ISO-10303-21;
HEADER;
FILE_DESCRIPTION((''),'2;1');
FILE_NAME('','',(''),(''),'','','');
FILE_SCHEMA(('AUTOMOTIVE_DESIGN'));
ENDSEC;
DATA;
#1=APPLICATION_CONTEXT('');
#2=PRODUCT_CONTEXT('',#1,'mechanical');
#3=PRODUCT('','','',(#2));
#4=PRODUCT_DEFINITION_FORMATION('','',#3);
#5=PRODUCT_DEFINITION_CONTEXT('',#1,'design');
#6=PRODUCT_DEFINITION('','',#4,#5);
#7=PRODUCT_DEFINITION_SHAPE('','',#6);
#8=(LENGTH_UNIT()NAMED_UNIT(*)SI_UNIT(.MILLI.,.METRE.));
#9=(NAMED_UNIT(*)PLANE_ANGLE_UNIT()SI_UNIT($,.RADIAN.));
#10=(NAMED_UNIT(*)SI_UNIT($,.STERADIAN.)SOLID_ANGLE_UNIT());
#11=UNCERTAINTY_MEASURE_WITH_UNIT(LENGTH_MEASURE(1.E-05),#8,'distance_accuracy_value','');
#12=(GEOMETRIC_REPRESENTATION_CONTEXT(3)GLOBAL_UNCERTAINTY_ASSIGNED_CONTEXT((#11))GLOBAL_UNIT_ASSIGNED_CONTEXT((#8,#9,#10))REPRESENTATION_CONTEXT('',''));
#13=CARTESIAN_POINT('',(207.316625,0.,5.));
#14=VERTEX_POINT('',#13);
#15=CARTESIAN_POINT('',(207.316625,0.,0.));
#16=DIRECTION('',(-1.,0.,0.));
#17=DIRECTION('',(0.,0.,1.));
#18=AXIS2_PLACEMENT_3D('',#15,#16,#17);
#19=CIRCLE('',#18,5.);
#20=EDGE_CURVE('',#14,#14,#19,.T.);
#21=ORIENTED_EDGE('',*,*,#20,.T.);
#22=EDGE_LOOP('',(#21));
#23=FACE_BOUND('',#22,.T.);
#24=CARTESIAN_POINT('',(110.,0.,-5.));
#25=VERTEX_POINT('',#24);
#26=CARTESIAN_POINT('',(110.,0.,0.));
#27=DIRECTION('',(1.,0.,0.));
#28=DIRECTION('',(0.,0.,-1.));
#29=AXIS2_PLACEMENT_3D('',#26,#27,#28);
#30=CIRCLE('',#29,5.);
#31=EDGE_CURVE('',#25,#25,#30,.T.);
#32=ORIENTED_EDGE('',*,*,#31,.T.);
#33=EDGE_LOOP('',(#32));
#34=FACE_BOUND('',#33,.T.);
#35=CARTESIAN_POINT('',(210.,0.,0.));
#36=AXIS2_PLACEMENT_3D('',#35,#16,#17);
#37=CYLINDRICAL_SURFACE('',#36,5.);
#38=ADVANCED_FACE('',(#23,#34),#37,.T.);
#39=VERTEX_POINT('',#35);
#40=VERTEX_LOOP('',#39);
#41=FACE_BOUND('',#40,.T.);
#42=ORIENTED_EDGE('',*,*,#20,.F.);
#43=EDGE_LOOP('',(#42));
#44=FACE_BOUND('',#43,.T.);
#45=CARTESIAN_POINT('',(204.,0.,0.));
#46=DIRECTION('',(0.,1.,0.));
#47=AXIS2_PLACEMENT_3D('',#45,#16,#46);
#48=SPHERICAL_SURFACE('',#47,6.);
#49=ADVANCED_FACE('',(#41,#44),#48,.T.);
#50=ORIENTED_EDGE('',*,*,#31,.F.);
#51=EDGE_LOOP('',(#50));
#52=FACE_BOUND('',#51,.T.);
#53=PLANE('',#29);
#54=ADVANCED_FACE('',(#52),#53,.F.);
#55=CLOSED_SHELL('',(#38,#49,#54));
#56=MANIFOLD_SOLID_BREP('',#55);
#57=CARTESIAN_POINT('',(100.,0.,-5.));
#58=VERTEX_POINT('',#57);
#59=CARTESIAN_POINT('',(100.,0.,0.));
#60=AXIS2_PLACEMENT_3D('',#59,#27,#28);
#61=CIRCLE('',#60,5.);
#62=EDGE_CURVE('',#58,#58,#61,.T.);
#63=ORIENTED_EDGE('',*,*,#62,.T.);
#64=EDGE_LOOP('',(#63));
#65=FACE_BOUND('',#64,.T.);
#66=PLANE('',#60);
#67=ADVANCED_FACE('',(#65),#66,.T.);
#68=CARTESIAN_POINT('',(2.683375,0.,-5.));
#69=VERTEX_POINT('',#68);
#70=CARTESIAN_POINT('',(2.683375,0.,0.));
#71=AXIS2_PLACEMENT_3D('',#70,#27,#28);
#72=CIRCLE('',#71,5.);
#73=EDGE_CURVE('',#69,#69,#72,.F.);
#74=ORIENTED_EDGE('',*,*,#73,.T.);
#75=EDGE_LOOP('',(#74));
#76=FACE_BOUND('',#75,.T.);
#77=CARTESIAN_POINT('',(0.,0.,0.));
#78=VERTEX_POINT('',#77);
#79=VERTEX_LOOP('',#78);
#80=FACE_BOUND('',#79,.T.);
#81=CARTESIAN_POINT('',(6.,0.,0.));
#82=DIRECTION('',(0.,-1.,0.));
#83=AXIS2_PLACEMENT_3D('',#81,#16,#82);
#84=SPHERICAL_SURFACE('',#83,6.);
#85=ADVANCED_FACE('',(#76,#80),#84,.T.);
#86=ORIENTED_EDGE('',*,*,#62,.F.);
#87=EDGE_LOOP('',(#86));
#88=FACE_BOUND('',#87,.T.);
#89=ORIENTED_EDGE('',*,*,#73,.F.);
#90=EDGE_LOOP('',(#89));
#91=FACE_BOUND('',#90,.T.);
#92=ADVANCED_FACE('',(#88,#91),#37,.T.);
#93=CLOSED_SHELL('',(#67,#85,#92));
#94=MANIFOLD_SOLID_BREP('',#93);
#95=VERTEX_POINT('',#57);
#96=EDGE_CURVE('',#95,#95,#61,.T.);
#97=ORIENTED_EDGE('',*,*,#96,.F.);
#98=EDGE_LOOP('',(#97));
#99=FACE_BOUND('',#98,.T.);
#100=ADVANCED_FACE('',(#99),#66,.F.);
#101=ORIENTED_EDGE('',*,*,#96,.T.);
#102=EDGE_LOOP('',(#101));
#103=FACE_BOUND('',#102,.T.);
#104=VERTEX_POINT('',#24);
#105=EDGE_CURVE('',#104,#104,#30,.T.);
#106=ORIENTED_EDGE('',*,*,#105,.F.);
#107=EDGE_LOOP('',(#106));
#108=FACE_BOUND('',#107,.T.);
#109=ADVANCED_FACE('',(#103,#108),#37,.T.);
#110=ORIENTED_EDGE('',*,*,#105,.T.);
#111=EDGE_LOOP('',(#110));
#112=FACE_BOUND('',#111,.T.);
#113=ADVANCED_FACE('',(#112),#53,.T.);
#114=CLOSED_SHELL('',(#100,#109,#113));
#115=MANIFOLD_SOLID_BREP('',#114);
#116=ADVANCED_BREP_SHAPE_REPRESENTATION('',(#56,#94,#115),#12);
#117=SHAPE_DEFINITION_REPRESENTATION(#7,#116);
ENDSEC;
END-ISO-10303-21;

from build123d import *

# Parameters (mm, degrees)
SKETCH1_R           = 5
BOSS_EXTRUDE1_DEPTH = 210
SPLIT6_START        = 100
SPLIT6_OUTLINE_R    = 5
SPLIT6_DEPTH        = 110
SPLIT6_3_OUTLINE_R  = 5
SPLIT6_3_DEPTH      = 10


# Read off the part's stored shape, not the designer's step: Split3, Split6
with BuildPart() as part:
    # Sketch1 → Boss-Extrude1 (new body)
    with BuildSketch(Plane(origin=(0, 0, 0), x_dir=(0, 0, -1), z_dir=(1, 0, 0))):
        Circle(SKETCH1_R)
    extrude(amount=BOSS_EXTRUDE1_DEPTH)

    # Split3 outline → Split3 (revolve, cut)
    with BuildSketch(Plane.YX):
        with BuildLine():
            ThreePointArc((5.000000003, 2.683375215), (2.837274334, 0.713235928), (0, 0))
            Line((0, 0), (5, 0))
            Line((5, 0), (5.000000003, 2.683375215))
        make_face()
    revolve(axis=Axis((0, 0, 0), (1, 0, 0)), mode=Mode.SUBTRACT)

    # SurfaceCut2: cut with a surface, the side behind it stays
    # Surface-Revolve4: a surface, the sketch's curves turned about an axis
    with BuildLine(Plane.XY, mode=Mode.PRIVATE) as surface_revolve4_1_path:
        ThreePointArc((210, 0), (209.286764074, 2.837274331), (207.31662479, 5))
    surface_revolve4_1 = Shell.revolve(surface_revolve4_1_path.wire(), 360, Axis((220.5, 0, 0), (-1, 0, 0)))
    split(bisect_by=surface_revolve4_1, keep=Keep.BOTTOM)

    # Split6 outline → Split6 (cut)
    with BuildSketch(Plane.YZ.offset(SPLIT6_START)):
        Circle(SPLIT6_OUTLINE_R)
    extrude(amount=SPLIT6_DEPTH, mode=Mode.SUBTRACT)


with BuildPart() as body_2:
    # Split6 2 outline → Split6 2 (revolve)
    with BuildSketch(Plane.YX):
        with BuildLine():
            Line((0, 210), (0, 110))
            Line((0, 110), (5, 110))
            Line((5, 110), (5.000000003, 207.316624785))
            ThreePointArc((5.000000003, 207.316624785), (2.837274334, 209.286764072), (0, 210))
        make_face()
    revolve(axis=Axis((0, 0, 0), (1, 0, 0)))


with BuildPart() as body_3:
    # Split6 3 outline → Split6 3 (new body)
    with BuildSketch(Plane.YZ.offset(SPLIT6_START)):
        Circle(SPLIT6_3_OUTLINE_R)
    extrude(amount=SPLIT6_3_DEPTH)


solid = Compound([part.part, body_2.part, body_3.part])
